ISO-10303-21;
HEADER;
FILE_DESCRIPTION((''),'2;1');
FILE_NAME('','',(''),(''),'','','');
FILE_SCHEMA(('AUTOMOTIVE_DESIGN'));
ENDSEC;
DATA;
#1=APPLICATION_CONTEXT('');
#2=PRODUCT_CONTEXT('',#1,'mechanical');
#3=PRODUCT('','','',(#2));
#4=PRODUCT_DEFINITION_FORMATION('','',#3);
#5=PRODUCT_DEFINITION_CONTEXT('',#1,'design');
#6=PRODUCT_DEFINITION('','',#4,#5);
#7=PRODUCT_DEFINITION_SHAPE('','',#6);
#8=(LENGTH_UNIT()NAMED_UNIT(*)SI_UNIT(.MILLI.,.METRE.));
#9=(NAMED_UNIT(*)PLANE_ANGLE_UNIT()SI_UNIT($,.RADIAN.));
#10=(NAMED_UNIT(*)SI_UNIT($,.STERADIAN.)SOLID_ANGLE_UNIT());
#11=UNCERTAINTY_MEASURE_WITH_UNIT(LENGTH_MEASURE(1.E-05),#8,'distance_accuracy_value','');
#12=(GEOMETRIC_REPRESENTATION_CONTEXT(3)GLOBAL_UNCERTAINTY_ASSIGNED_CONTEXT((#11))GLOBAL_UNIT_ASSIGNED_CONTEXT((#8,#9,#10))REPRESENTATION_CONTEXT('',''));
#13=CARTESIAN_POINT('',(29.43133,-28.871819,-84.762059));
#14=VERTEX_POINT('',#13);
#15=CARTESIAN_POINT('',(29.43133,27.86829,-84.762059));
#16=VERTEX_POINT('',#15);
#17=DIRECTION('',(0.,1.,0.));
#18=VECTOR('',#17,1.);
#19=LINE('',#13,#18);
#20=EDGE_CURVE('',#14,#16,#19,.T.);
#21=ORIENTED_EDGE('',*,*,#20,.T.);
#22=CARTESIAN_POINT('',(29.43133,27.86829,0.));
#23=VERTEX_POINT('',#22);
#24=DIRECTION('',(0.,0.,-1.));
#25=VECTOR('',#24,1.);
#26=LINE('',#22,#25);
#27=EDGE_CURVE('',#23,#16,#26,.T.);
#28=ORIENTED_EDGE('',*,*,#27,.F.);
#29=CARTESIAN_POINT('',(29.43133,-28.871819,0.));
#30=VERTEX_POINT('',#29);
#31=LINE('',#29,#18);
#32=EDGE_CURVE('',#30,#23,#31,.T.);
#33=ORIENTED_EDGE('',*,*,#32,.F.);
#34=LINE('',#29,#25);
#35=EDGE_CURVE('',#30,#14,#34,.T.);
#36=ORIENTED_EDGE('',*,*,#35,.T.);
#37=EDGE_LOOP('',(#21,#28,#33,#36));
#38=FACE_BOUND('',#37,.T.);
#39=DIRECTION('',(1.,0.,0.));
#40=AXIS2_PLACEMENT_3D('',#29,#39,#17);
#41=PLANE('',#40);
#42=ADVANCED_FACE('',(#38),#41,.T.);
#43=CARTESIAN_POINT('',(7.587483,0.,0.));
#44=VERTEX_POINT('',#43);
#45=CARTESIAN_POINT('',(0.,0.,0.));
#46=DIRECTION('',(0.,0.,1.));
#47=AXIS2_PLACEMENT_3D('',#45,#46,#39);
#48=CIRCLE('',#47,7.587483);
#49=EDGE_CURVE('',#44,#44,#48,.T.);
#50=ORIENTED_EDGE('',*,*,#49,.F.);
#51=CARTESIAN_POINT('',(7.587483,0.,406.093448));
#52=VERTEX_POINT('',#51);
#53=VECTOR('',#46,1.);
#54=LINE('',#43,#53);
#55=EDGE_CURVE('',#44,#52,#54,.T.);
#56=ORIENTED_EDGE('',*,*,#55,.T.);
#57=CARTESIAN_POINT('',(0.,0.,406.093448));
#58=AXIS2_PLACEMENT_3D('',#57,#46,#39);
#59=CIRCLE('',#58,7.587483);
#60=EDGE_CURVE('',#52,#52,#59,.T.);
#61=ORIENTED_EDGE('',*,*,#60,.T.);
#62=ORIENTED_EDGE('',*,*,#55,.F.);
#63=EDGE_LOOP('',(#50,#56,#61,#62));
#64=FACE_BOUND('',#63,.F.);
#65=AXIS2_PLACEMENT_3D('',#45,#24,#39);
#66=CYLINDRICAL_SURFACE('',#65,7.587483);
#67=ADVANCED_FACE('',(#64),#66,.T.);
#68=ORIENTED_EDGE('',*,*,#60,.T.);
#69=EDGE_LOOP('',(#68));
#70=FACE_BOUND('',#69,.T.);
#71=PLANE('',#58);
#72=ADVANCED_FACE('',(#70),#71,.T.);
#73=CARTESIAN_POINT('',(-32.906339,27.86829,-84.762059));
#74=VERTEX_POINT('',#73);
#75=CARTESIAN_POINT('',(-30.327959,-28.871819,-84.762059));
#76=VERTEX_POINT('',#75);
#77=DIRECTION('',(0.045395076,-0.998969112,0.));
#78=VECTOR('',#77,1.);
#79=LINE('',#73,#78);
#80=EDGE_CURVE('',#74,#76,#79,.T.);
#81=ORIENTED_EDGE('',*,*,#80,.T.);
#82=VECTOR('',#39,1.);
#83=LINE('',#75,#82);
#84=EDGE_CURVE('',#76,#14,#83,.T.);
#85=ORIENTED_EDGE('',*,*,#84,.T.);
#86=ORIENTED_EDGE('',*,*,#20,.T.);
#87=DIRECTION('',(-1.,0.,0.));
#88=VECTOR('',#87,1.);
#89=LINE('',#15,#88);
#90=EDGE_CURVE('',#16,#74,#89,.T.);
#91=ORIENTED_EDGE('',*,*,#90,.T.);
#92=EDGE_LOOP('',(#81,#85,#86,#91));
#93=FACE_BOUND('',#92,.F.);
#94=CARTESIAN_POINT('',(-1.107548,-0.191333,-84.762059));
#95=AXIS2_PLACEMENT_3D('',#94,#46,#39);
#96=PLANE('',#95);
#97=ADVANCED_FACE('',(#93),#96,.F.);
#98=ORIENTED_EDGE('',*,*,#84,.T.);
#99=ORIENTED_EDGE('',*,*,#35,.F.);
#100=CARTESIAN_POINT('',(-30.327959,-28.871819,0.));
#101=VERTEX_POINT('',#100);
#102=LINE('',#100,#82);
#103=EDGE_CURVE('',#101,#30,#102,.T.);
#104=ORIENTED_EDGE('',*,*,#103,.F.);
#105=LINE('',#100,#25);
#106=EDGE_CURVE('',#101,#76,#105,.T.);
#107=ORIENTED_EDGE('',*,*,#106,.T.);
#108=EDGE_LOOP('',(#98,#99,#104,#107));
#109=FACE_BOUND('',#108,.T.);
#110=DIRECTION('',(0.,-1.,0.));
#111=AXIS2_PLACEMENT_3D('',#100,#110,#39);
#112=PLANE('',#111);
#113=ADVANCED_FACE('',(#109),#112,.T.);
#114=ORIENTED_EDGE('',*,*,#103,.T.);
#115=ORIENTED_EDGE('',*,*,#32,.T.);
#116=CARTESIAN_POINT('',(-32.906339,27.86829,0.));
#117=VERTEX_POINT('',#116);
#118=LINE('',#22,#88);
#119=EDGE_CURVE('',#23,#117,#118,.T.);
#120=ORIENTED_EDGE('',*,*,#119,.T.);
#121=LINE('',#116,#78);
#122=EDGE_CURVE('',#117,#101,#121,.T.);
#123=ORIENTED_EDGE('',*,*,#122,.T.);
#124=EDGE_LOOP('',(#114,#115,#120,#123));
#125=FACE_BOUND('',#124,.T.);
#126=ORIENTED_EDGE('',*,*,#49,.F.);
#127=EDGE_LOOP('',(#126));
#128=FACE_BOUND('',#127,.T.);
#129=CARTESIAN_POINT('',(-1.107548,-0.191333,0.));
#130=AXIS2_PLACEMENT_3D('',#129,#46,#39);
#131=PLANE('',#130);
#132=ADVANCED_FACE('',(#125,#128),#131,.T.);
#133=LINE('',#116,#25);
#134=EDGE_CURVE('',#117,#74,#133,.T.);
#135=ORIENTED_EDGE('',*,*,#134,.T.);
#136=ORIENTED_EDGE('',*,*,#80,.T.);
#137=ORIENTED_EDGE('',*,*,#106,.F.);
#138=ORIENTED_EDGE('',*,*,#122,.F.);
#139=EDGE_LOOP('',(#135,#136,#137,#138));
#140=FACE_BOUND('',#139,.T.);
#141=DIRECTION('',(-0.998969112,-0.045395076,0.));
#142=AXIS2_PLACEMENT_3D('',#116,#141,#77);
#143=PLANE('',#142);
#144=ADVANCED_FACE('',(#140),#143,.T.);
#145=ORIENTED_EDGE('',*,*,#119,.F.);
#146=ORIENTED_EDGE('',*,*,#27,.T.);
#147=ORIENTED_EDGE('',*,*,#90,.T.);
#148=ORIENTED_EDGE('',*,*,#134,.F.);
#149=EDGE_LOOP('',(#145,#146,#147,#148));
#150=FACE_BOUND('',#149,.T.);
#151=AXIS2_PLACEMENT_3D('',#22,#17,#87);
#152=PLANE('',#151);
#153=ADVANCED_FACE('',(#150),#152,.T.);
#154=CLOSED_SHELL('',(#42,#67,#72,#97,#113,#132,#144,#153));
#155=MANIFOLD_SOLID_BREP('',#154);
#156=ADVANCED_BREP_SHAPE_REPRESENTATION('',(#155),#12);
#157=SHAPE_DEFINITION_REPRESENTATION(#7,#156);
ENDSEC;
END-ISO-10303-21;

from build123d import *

# Parameters (mm, degrees)
F1_DEPTH = 84.7620591521
F2_R     = 7.5874829839
F3_DEPTH = 406.0934484005


# Not quite as in the source:
# - the program builds the solid bodies; features that only make, move or delete a surface that nothing else refers to are left out


with BuildPart() as f1:
    # F0 (on Top) → F1 (new body)
    with BuildSketch(Plane.XY):
        Polygon((29.4313300401, 27.8682895005), (-32.9063385725, 27.8682895005), (-30.3279589862, -28.8718193769), (29.4313300401, -28.8718193769), align=None)
    extrude(amount=-F1_DEPTH)

    # F2 (on Top) → F3 (join)
    with BuildSketch(Plane.XY):
        Circle(F2_R)
    extrude(amount=F3_DEPTH)


solid = f1.part
